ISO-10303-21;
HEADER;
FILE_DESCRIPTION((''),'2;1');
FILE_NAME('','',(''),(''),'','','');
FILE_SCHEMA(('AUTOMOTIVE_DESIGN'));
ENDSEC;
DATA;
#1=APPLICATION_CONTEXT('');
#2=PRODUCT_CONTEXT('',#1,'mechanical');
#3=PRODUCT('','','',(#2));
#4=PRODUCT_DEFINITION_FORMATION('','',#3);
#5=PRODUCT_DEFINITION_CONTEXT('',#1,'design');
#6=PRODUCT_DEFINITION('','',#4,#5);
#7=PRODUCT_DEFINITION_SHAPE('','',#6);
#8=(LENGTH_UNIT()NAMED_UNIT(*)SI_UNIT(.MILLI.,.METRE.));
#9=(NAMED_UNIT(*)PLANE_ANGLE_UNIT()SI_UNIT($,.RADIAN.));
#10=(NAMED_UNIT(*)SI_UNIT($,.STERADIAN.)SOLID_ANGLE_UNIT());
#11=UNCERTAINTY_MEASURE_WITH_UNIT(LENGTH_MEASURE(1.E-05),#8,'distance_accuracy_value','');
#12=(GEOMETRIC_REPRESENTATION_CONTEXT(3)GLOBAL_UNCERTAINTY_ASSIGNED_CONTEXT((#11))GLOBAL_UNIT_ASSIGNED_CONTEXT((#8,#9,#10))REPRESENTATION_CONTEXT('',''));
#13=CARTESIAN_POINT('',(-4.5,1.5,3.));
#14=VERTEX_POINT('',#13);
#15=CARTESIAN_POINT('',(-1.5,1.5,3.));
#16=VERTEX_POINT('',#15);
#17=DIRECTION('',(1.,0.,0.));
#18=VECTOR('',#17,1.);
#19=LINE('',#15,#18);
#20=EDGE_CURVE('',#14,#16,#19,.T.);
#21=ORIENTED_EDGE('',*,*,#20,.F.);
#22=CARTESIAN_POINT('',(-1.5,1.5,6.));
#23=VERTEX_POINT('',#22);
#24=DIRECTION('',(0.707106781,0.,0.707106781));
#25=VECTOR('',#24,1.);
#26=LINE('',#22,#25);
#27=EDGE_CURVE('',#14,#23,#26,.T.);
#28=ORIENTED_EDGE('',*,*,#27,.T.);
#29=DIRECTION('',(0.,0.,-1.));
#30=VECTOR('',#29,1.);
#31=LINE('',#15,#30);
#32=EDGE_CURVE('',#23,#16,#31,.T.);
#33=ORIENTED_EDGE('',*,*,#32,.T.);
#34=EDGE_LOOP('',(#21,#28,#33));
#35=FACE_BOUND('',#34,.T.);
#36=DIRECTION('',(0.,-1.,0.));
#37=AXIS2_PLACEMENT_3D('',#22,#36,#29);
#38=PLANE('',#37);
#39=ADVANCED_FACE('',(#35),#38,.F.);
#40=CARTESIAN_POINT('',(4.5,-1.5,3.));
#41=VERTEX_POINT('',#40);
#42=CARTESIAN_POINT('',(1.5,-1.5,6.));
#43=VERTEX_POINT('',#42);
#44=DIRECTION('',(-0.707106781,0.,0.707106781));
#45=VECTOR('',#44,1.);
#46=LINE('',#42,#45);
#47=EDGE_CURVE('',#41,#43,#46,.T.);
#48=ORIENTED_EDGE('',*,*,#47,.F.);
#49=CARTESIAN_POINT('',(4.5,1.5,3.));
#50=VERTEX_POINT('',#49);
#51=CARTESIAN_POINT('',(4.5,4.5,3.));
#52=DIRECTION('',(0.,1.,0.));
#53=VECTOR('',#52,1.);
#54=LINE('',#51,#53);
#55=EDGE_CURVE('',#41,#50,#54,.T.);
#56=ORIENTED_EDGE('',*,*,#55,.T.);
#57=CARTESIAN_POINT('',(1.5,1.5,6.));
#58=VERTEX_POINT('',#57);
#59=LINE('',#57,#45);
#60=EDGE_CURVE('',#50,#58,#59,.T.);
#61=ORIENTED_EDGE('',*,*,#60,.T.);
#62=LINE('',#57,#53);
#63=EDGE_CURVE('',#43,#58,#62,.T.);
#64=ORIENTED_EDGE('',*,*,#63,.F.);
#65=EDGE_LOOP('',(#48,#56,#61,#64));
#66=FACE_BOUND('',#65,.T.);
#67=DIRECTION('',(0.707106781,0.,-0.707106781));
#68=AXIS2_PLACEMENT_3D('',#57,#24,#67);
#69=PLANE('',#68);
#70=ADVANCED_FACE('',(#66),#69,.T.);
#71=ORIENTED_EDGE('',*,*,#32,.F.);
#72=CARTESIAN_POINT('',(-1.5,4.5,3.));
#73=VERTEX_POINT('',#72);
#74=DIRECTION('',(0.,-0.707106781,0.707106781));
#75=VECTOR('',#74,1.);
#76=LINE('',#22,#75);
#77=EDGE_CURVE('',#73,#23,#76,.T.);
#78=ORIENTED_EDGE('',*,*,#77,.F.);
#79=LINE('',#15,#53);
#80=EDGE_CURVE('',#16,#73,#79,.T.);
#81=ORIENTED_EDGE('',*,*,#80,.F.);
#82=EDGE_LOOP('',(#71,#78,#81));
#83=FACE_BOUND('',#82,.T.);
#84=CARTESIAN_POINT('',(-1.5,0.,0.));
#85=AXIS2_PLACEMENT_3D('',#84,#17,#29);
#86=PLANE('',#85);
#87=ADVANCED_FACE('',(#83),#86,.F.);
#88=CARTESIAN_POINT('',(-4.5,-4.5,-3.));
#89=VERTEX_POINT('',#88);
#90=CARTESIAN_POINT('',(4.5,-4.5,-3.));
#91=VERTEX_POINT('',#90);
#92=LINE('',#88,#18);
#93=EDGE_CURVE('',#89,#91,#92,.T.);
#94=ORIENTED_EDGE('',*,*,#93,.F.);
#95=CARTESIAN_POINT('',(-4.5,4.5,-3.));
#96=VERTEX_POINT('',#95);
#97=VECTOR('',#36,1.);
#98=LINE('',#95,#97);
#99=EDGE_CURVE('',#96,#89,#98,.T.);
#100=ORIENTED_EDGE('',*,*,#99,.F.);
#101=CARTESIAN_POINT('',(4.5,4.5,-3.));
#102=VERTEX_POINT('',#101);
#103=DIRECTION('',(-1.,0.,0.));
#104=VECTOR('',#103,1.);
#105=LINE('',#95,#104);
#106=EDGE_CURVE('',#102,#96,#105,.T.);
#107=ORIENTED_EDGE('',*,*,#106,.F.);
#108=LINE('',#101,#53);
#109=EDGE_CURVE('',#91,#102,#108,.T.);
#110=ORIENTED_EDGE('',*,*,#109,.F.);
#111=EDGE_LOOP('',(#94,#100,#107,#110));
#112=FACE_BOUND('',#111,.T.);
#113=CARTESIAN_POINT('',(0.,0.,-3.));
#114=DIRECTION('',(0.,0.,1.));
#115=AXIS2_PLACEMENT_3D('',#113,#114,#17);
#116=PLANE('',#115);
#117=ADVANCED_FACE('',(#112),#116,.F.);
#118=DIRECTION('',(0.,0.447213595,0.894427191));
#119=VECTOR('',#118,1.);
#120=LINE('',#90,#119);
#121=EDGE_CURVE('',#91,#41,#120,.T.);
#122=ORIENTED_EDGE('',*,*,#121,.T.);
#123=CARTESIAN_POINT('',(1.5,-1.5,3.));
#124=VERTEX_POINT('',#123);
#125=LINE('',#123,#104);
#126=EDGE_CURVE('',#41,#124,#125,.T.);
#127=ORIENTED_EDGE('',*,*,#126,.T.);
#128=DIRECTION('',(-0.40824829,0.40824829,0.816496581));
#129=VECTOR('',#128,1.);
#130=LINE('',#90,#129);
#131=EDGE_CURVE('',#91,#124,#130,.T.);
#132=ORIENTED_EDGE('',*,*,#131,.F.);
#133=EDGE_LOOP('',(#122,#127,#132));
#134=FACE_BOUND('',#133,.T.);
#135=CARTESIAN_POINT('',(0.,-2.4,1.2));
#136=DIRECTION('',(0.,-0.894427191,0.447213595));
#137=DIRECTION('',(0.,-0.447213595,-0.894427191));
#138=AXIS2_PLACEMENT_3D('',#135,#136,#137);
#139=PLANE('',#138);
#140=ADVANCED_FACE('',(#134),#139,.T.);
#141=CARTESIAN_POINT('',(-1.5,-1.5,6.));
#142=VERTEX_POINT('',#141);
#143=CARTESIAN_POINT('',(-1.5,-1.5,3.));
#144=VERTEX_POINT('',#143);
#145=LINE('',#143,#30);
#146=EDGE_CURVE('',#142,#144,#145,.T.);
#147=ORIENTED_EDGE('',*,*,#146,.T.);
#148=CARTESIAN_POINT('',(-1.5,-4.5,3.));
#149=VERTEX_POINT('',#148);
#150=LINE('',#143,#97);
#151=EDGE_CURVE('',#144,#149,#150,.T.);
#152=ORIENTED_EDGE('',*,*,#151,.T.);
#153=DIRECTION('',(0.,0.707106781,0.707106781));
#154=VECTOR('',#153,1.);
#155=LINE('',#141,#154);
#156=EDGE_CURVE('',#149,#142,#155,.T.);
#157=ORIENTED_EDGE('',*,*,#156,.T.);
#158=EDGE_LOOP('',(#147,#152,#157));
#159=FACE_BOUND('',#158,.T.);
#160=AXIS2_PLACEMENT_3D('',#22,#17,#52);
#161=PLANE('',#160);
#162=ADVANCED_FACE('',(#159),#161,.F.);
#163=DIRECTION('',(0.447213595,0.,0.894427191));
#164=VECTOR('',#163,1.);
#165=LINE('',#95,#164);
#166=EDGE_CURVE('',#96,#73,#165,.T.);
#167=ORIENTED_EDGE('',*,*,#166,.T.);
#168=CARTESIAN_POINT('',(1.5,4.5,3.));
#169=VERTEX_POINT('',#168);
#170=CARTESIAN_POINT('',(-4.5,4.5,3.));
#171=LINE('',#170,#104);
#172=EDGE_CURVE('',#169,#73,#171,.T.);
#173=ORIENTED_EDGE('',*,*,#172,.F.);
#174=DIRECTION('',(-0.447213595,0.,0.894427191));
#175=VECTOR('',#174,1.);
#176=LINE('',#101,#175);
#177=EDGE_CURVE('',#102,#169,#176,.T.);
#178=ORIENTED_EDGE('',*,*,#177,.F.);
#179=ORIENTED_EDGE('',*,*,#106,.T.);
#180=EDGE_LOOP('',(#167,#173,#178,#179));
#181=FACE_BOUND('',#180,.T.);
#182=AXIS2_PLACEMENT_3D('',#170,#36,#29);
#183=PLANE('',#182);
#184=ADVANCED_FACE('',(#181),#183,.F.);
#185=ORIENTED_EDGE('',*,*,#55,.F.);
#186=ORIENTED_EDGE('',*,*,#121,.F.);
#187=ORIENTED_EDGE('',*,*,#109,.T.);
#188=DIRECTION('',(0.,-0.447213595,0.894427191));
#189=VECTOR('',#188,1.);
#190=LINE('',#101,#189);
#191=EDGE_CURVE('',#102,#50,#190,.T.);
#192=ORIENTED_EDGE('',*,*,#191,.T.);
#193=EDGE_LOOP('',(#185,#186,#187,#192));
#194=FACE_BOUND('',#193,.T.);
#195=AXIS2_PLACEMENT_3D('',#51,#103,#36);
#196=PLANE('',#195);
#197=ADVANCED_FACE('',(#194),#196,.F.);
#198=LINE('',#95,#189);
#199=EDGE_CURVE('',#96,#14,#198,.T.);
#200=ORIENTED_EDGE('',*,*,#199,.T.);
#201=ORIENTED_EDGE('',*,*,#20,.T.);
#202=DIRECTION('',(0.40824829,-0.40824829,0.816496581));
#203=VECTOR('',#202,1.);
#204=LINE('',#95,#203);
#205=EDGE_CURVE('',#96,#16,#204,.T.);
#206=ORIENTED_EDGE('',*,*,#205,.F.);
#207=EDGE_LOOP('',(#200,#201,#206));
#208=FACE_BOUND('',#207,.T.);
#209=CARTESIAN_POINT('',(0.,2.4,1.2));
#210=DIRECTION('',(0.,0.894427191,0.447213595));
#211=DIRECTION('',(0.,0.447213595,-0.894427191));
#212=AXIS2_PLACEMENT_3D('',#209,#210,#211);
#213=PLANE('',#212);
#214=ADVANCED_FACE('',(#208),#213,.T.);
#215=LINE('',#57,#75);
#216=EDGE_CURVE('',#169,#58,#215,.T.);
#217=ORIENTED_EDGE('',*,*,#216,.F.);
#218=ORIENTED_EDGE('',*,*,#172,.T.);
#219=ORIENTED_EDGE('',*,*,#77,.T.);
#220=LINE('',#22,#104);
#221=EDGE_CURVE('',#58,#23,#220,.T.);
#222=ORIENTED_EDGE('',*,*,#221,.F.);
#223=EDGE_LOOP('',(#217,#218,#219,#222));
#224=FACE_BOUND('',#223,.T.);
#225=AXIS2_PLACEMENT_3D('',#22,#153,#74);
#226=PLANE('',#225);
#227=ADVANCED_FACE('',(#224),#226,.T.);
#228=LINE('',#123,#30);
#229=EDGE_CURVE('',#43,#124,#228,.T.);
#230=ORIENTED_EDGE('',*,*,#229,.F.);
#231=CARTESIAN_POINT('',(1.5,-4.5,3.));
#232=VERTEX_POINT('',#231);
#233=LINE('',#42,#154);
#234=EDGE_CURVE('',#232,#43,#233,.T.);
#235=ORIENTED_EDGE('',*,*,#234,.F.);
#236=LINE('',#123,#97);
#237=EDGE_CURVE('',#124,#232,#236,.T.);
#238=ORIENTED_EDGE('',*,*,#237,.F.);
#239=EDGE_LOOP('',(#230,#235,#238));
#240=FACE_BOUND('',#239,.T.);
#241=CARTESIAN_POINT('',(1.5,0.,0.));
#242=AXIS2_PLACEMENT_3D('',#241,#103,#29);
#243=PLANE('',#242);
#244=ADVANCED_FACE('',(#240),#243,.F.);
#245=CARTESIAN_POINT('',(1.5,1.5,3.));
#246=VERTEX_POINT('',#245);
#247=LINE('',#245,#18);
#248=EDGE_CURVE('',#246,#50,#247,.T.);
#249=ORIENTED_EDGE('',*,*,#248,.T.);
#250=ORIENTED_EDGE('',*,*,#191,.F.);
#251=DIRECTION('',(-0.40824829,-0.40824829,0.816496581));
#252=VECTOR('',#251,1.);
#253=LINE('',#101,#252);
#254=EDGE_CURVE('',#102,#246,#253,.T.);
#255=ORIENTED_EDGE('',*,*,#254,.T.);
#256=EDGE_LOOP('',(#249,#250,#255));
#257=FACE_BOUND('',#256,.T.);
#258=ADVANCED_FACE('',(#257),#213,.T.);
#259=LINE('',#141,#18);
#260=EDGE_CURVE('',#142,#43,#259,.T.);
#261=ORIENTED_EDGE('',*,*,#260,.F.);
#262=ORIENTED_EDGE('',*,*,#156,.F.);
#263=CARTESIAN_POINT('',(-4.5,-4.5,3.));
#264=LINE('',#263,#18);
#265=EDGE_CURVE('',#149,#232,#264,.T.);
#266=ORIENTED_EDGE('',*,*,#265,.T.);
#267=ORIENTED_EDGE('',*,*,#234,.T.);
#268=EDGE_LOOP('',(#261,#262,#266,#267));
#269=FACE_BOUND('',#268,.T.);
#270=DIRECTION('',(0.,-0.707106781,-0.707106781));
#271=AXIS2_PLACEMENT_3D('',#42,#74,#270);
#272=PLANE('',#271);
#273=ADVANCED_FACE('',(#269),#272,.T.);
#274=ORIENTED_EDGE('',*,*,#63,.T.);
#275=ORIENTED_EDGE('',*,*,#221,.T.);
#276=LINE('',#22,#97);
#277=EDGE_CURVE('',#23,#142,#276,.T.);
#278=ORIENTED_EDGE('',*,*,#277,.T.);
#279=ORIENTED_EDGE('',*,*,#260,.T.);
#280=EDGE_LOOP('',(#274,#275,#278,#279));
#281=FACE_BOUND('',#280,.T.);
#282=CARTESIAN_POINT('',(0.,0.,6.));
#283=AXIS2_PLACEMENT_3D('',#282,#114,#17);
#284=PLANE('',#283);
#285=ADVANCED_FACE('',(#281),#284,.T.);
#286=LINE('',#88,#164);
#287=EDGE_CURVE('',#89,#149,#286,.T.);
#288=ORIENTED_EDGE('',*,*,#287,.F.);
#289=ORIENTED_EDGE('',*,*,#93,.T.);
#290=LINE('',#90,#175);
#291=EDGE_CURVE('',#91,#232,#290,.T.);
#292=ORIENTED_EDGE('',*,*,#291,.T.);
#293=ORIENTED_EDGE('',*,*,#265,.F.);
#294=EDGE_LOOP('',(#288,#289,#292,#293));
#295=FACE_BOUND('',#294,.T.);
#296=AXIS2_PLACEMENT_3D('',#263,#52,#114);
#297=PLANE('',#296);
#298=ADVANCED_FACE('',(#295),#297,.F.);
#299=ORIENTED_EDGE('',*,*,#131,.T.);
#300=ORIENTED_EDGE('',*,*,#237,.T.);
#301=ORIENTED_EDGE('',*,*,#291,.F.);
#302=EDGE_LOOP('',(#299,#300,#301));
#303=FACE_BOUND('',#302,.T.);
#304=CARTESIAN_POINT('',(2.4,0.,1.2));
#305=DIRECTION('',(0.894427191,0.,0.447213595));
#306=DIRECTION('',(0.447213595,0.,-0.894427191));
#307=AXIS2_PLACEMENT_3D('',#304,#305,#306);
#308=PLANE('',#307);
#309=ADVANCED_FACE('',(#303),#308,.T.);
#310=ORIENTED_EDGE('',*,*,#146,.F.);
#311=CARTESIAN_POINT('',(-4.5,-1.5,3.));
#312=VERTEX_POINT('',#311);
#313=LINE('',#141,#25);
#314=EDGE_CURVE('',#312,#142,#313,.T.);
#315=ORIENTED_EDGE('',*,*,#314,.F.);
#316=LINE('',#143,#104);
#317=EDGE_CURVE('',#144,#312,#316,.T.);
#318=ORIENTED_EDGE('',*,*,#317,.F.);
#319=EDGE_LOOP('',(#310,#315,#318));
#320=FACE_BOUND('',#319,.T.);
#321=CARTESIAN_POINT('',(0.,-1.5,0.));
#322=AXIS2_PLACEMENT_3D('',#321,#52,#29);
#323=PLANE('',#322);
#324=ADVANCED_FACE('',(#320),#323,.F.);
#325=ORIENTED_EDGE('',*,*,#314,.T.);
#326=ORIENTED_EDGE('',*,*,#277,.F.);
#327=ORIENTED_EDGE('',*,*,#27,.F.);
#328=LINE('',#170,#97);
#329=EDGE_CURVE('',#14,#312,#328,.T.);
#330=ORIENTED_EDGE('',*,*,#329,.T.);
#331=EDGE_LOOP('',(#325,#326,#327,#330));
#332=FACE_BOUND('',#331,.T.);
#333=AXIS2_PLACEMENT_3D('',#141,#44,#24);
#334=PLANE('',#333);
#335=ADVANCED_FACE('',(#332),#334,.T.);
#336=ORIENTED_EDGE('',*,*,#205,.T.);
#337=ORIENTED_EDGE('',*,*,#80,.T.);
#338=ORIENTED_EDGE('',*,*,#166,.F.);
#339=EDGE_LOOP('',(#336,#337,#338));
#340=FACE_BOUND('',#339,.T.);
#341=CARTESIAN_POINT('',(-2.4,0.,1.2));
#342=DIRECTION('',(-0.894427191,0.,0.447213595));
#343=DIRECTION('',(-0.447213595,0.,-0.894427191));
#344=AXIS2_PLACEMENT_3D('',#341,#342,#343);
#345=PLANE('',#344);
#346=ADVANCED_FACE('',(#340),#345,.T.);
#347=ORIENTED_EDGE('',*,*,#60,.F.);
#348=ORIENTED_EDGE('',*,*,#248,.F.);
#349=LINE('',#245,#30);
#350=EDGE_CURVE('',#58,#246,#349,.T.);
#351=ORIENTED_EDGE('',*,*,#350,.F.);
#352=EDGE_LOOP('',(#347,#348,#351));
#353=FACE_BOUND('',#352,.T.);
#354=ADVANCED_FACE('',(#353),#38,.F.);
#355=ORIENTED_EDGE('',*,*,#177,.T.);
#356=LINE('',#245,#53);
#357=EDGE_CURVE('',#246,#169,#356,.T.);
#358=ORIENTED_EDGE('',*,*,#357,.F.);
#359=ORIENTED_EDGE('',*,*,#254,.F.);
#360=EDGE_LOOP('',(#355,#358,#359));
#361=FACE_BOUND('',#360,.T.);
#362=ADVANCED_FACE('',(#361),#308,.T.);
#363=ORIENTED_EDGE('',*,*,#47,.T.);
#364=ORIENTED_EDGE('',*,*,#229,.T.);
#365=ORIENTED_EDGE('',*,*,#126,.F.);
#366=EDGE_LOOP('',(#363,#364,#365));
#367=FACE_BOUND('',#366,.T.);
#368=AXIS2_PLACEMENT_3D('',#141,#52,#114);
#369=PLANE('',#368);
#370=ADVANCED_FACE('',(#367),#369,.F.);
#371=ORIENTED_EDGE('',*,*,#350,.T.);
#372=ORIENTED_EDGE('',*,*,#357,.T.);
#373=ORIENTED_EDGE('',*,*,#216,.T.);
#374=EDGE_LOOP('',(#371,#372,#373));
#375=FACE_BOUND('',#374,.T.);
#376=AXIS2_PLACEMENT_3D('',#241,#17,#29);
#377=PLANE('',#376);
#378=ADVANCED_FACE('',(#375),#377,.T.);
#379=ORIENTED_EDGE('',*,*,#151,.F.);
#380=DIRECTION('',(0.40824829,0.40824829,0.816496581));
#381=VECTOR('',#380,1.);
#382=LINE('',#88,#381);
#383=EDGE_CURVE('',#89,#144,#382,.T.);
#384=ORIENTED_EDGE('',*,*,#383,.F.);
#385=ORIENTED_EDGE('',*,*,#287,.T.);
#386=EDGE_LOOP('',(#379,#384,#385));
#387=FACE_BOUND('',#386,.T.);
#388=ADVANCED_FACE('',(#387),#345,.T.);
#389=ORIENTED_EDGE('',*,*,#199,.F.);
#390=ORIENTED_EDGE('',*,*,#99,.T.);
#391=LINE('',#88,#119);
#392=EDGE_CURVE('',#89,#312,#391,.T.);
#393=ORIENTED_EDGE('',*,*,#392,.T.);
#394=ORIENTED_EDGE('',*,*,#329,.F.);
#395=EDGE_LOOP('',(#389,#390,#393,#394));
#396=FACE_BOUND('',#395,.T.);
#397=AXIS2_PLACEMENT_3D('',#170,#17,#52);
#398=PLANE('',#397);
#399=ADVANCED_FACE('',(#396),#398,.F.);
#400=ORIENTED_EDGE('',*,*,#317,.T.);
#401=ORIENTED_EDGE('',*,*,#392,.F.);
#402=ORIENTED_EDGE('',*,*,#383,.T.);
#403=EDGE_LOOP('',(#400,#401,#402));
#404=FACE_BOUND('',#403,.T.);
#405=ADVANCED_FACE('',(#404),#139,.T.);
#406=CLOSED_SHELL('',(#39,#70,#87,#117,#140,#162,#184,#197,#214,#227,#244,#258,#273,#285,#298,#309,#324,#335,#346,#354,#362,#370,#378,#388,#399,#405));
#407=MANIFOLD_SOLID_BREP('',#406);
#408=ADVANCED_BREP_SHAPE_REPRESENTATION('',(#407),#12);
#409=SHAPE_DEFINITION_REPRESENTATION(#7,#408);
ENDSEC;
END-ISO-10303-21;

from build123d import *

# Parameters (mm, degrees)
SKETCH_1_W               = 9
SKETCH_1_H               = 9
EXTRUDE_2_DEPTH          = 3
SKETCH_4_W               = 3
SKETCH_4_H               = 3
EXTRUDE_3_DEPTH          = 3
MIRROR_2_DEPTH           = 2.683281573
MIRROR_2_DRAFT           = 11.536959
MIRROR_2_2_DEPTH         = 2.683281573
MIRROR_2_2_DRAFT         = 11.536959
EXTRUDE_4_DEPTH          = 3
PATTERN_CIRCULAR_1_COUNT = 4


# Read off the part's stored shape, not the designer's step: 镜向2
with BuildPart() as part:
    # 草图1 → 凸台-拉伸2 (new, symmetric)
    with BuildSketch(Plane.XY):
        Rectangle(SKETCH_1_W, SKETCH_1_H)
    extrude(amount=EXTRUDE_2_DEPTH, both=True)

    # 草图4 → 凸台-拉伸3 (add)
    with BuildSketch(Plane.XY.offset(3)):
        Rectangle(SKETCH_4_W, SKETCH_4_H)
    extrude(amount=EXTRUDE_3_DEPTH)

    # 草图5 → 切除-放样1 section 0
    with BuildSketch(Plane.XY.offset(3), mode=Mode.PRIVATE) as loft_1_s0:
        with BuildLine():
            Line((1.5, -1.5), (4.5, -1.5))
            Line((4.5, -1.5), (4.5, -4.5))
            Line((4.5, -4.5), (1.5, -4.5))
            Line((1.5, -4.5), (1.5, -1.5))
        make_face()
    loft_1 = loft([Vertex(4.5, -4.5, -3), loft_1_s0.sketch], mode=Mode.SUBTRACT)

    # 镜向1: 切除-放样1 across plane
    add(loft_1.mirror(Plane.ZX), mode=Mode.SUBTRACT)


with BuildPart() as mirror_2_tool:
    # 镜向2 outline → 镜向2 (with draft: the straight prism first)
    with BuildSketch(Plane(origin=(-2.4, 0, 1.2), x_dir=(0.4472135954999576, 0, 0.8944271909999161), z_dir=(0.894427190999916, 0, -0.447213595499958))):
        Polygon((-4.695742753, 4.5), (2.01246118, 1.5), (2.01246118, 4.5), align=None)
    extrude(amount=-MIRROR_2_DEPTH)
    # 镜向2: the draft: its side faces are tilted about the plane it starts from
    mirror_2_sides = [mirror_2_tool.faces().sort_by_distance(p)[0] for p in [
        (-4.2, -3, 0.6),
        (-2.7, -3, 3.6),
        (-4.2, -4.5, 0.6),
    ]]
    draft(mirror_2_sides, Plane(origin=(-2.4, 0, 1.2), x_dir=(0.4472135954999576, 0, 0.8944271909999161), z_dir=(0.894427190999916, 0, -0.447213595499958)), MIRROR_2_DRAFT)


with BuildPart() as part_1:
    add(part.part)

    # 镜向2: cut by mirror_2_tool
    add(mirror_2_tool.part, mode=Mode.SUBTRACT)


with BuildPart() as mirror_2_2_tool:
    # Mirror 2 2 outline → Mirror 2 2 (with draft: the straight prism first)
    with BuildSketch(Plane(origin=(-2.4, 0, 1.2), x_dir=(0.4472135954999576, 0, 0.8944271909999161), z_dir=(0.894427190999916, 0, -0.447213595499958))):
        Polygon((2.01246118, -4.5), (2.01246118, -1.5), (-4.695742753, -4.5), align=None)
    extrude(amount=-MIRROR_2_2_DEPTH)
    # Mirror 2 2: the draft: its side faces are tilted about the plane it starts from
    mirror_2_2_sides = [mirror_2_2_tool.faces().sort_by_distance(p)[0] for p in [
        (-2.7, 3, 3.6),
        (-4.2, 3, 0.6),
        (-4.2, 4.5, 0.6),
    ]]
    draft(mirror_2_2_sides, Plane(origin=(-2.4, 0, 1.2), x_dir=(0.4472135954999576, 0, 0.8944271909999161), z_dir=(0.894427190999916, 0, -0.447213595499958)), MIRROR_2_2_DRAFT)


with BuildPart() as part_2:
    add(part_1.part)

    # Mirror 2 2: cut by mirror_2_2_tool
    add(mirror_2_2_tool.part, mode=Mode.SUBTRACT)

    # 草图7 → 凸台-拉伸4 (add)
    with BuildSketch(Plane.XZ.offset(1.5)):
        Polygon((1.5, 6), (4.5, 3), (1.5, 3), align=None)
    extrude_4 = extrude(amount=-EXTRUDE_4_DEPTH)

    # 阵列(圆周)1: 凸台-拉伸4 ×4 about axis
    pattern_circular_1_axis = Axis((0, 0, 0), (0, 0, 1))
    for i in range(1, PATTERN_CIRCULAR_1_COUNT):
        add(extrude_4.rotate(pattern_circular_1_axis, i * 360 / PATTERN_CIRCULAR_1_COUNT))


solid = part_2.part
